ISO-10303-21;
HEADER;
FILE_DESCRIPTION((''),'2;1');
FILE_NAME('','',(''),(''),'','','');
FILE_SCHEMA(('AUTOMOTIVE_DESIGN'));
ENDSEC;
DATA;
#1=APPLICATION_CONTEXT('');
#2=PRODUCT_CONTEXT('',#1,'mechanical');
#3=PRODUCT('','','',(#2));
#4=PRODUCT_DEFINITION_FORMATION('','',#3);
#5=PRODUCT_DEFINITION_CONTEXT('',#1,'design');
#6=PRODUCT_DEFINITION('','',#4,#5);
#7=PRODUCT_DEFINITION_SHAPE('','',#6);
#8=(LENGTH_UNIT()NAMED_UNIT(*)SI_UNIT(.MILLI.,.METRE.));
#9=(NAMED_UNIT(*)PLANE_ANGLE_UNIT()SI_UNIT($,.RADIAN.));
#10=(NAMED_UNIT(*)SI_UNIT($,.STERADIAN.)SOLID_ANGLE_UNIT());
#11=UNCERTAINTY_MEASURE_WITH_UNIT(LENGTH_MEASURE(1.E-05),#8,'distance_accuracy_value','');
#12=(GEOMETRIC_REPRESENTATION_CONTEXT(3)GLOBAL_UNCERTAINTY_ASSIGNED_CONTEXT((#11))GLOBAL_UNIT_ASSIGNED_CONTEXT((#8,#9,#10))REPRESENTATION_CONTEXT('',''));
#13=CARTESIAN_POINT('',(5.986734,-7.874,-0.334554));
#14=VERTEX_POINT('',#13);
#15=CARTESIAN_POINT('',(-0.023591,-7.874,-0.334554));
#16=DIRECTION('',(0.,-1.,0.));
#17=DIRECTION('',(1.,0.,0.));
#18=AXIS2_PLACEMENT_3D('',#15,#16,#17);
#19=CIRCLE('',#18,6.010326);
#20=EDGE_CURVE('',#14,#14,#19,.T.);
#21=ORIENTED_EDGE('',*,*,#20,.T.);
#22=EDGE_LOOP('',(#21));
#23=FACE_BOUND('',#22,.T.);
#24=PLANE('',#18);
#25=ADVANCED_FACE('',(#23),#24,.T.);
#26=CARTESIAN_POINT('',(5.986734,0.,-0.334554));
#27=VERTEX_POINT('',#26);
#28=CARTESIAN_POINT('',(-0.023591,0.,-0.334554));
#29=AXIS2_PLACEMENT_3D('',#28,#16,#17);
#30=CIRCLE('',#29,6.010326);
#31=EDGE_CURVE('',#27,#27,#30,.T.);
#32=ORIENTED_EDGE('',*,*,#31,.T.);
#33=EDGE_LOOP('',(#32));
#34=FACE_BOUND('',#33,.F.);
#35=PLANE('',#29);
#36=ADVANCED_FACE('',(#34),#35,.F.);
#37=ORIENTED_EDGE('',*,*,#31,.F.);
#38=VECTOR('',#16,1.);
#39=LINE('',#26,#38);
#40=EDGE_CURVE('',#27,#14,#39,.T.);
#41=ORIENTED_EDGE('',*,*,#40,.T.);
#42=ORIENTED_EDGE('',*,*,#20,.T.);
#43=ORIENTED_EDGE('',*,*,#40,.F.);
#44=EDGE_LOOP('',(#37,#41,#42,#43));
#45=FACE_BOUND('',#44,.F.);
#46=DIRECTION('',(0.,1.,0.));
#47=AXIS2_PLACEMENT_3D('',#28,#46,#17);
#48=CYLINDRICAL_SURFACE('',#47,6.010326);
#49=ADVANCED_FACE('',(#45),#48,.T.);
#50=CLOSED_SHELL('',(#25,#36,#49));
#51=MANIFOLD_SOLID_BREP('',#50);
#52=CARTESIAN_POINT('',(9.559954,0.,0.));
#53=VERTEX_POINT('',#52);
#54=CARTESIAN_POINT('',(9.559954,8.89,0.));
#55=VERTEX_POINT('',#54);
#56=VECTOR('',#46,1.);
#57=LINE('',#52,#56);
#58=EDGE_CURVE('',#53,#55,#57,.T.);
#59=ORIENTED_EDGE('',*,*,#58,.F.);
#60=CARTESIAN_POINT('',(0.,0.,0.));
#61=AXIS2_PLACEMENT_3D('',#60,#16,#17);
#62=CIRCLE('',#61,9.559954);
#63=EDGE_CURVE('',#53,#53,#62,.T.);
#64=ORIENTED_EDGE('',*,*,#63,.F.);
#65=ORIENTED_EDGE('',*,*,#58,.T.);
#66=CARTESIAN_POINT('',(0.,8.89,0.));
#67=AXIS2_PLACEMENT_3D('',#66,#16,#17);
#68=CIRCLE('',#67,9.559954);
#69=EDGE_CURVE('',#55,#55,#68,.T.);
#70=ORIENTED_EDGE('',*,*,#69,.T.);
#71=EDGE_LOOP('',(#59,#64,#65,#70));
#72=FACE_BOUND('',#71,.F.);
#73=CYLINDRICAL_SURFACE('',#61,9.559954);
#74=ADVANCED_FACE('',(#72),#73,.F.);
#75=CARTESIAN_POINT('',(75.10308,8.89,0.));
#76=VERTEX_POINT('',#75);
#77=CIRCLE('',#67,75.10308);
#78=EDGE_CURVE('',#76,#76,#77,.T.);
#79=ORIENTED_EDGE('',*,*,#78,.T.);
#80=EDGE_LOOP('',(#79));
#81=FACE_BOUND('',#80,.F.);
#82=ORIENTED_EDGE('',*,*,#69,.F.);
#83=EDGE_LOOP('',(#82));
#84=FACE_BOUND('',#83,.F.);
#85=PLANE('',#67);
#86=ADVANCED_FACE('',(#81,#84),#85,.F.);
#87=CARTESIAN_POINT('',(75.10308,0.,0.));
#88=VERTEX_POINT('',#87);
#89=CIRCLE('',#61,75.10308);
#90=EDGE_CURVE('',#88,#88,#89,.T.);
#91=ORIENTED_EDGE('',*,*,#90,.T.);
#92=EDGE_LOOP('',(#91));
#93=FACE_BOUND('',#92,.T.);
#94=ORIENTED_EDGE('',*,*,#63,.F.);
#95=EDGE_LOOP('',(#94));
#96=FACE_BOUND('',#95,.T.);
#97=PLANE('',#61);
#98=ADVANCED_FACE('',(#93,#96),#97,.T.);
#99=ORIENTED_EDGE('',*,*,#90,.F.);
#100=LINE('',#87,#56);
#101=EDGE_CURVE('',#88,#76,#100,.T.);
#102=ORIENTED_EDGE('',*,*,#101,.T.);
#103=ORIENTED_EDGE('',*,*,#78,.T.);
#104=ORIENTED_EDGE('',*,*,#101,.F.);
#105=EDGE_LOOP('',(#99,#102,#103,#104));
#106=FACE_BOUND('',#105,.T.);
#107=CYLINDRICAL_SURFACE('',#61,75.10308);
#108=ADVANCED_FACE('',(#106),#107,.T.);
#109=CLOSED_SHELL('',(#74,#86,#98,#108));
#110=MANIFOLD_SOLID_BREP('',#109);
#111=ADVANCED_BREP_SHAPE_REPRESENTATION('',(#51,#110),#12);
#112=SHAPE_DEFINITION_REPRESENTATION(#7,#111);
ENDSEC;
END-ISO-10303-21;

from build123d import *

# Parameters (mm, degrees)
F0_R     = 75.10308026
F0_R_2   = 9.559954458
F4_DEPTH = 8.89
F6_R     = 6.0103256088
F7_DEPTH = 7.874


# Not quite as in the source:
# - the program builds the solid bodies; features that only make, move or delete a surface that nothing else refers to are left out


with BuildPart() as f4:
    # F0 (on Front) → F4 (new body)
    with BuildSketch(Plane.XZ):
        Circle(F0_R)
        Circle(F0_R_2, mode=Mode.SUBTRACT)
    extrude(amount=-F4_DEPTH)


with BuildPart() as f7:
    # F6 (on Front) → F7 (new body)
    with BuildSketch(Plane.XZ):
        with Locations((-0.0235913109, -0.3345536048)):
            Circle(F6_R)
    extrude(amount=F7_DEPTH)


solid = Compound([f4.part, f7.part])
